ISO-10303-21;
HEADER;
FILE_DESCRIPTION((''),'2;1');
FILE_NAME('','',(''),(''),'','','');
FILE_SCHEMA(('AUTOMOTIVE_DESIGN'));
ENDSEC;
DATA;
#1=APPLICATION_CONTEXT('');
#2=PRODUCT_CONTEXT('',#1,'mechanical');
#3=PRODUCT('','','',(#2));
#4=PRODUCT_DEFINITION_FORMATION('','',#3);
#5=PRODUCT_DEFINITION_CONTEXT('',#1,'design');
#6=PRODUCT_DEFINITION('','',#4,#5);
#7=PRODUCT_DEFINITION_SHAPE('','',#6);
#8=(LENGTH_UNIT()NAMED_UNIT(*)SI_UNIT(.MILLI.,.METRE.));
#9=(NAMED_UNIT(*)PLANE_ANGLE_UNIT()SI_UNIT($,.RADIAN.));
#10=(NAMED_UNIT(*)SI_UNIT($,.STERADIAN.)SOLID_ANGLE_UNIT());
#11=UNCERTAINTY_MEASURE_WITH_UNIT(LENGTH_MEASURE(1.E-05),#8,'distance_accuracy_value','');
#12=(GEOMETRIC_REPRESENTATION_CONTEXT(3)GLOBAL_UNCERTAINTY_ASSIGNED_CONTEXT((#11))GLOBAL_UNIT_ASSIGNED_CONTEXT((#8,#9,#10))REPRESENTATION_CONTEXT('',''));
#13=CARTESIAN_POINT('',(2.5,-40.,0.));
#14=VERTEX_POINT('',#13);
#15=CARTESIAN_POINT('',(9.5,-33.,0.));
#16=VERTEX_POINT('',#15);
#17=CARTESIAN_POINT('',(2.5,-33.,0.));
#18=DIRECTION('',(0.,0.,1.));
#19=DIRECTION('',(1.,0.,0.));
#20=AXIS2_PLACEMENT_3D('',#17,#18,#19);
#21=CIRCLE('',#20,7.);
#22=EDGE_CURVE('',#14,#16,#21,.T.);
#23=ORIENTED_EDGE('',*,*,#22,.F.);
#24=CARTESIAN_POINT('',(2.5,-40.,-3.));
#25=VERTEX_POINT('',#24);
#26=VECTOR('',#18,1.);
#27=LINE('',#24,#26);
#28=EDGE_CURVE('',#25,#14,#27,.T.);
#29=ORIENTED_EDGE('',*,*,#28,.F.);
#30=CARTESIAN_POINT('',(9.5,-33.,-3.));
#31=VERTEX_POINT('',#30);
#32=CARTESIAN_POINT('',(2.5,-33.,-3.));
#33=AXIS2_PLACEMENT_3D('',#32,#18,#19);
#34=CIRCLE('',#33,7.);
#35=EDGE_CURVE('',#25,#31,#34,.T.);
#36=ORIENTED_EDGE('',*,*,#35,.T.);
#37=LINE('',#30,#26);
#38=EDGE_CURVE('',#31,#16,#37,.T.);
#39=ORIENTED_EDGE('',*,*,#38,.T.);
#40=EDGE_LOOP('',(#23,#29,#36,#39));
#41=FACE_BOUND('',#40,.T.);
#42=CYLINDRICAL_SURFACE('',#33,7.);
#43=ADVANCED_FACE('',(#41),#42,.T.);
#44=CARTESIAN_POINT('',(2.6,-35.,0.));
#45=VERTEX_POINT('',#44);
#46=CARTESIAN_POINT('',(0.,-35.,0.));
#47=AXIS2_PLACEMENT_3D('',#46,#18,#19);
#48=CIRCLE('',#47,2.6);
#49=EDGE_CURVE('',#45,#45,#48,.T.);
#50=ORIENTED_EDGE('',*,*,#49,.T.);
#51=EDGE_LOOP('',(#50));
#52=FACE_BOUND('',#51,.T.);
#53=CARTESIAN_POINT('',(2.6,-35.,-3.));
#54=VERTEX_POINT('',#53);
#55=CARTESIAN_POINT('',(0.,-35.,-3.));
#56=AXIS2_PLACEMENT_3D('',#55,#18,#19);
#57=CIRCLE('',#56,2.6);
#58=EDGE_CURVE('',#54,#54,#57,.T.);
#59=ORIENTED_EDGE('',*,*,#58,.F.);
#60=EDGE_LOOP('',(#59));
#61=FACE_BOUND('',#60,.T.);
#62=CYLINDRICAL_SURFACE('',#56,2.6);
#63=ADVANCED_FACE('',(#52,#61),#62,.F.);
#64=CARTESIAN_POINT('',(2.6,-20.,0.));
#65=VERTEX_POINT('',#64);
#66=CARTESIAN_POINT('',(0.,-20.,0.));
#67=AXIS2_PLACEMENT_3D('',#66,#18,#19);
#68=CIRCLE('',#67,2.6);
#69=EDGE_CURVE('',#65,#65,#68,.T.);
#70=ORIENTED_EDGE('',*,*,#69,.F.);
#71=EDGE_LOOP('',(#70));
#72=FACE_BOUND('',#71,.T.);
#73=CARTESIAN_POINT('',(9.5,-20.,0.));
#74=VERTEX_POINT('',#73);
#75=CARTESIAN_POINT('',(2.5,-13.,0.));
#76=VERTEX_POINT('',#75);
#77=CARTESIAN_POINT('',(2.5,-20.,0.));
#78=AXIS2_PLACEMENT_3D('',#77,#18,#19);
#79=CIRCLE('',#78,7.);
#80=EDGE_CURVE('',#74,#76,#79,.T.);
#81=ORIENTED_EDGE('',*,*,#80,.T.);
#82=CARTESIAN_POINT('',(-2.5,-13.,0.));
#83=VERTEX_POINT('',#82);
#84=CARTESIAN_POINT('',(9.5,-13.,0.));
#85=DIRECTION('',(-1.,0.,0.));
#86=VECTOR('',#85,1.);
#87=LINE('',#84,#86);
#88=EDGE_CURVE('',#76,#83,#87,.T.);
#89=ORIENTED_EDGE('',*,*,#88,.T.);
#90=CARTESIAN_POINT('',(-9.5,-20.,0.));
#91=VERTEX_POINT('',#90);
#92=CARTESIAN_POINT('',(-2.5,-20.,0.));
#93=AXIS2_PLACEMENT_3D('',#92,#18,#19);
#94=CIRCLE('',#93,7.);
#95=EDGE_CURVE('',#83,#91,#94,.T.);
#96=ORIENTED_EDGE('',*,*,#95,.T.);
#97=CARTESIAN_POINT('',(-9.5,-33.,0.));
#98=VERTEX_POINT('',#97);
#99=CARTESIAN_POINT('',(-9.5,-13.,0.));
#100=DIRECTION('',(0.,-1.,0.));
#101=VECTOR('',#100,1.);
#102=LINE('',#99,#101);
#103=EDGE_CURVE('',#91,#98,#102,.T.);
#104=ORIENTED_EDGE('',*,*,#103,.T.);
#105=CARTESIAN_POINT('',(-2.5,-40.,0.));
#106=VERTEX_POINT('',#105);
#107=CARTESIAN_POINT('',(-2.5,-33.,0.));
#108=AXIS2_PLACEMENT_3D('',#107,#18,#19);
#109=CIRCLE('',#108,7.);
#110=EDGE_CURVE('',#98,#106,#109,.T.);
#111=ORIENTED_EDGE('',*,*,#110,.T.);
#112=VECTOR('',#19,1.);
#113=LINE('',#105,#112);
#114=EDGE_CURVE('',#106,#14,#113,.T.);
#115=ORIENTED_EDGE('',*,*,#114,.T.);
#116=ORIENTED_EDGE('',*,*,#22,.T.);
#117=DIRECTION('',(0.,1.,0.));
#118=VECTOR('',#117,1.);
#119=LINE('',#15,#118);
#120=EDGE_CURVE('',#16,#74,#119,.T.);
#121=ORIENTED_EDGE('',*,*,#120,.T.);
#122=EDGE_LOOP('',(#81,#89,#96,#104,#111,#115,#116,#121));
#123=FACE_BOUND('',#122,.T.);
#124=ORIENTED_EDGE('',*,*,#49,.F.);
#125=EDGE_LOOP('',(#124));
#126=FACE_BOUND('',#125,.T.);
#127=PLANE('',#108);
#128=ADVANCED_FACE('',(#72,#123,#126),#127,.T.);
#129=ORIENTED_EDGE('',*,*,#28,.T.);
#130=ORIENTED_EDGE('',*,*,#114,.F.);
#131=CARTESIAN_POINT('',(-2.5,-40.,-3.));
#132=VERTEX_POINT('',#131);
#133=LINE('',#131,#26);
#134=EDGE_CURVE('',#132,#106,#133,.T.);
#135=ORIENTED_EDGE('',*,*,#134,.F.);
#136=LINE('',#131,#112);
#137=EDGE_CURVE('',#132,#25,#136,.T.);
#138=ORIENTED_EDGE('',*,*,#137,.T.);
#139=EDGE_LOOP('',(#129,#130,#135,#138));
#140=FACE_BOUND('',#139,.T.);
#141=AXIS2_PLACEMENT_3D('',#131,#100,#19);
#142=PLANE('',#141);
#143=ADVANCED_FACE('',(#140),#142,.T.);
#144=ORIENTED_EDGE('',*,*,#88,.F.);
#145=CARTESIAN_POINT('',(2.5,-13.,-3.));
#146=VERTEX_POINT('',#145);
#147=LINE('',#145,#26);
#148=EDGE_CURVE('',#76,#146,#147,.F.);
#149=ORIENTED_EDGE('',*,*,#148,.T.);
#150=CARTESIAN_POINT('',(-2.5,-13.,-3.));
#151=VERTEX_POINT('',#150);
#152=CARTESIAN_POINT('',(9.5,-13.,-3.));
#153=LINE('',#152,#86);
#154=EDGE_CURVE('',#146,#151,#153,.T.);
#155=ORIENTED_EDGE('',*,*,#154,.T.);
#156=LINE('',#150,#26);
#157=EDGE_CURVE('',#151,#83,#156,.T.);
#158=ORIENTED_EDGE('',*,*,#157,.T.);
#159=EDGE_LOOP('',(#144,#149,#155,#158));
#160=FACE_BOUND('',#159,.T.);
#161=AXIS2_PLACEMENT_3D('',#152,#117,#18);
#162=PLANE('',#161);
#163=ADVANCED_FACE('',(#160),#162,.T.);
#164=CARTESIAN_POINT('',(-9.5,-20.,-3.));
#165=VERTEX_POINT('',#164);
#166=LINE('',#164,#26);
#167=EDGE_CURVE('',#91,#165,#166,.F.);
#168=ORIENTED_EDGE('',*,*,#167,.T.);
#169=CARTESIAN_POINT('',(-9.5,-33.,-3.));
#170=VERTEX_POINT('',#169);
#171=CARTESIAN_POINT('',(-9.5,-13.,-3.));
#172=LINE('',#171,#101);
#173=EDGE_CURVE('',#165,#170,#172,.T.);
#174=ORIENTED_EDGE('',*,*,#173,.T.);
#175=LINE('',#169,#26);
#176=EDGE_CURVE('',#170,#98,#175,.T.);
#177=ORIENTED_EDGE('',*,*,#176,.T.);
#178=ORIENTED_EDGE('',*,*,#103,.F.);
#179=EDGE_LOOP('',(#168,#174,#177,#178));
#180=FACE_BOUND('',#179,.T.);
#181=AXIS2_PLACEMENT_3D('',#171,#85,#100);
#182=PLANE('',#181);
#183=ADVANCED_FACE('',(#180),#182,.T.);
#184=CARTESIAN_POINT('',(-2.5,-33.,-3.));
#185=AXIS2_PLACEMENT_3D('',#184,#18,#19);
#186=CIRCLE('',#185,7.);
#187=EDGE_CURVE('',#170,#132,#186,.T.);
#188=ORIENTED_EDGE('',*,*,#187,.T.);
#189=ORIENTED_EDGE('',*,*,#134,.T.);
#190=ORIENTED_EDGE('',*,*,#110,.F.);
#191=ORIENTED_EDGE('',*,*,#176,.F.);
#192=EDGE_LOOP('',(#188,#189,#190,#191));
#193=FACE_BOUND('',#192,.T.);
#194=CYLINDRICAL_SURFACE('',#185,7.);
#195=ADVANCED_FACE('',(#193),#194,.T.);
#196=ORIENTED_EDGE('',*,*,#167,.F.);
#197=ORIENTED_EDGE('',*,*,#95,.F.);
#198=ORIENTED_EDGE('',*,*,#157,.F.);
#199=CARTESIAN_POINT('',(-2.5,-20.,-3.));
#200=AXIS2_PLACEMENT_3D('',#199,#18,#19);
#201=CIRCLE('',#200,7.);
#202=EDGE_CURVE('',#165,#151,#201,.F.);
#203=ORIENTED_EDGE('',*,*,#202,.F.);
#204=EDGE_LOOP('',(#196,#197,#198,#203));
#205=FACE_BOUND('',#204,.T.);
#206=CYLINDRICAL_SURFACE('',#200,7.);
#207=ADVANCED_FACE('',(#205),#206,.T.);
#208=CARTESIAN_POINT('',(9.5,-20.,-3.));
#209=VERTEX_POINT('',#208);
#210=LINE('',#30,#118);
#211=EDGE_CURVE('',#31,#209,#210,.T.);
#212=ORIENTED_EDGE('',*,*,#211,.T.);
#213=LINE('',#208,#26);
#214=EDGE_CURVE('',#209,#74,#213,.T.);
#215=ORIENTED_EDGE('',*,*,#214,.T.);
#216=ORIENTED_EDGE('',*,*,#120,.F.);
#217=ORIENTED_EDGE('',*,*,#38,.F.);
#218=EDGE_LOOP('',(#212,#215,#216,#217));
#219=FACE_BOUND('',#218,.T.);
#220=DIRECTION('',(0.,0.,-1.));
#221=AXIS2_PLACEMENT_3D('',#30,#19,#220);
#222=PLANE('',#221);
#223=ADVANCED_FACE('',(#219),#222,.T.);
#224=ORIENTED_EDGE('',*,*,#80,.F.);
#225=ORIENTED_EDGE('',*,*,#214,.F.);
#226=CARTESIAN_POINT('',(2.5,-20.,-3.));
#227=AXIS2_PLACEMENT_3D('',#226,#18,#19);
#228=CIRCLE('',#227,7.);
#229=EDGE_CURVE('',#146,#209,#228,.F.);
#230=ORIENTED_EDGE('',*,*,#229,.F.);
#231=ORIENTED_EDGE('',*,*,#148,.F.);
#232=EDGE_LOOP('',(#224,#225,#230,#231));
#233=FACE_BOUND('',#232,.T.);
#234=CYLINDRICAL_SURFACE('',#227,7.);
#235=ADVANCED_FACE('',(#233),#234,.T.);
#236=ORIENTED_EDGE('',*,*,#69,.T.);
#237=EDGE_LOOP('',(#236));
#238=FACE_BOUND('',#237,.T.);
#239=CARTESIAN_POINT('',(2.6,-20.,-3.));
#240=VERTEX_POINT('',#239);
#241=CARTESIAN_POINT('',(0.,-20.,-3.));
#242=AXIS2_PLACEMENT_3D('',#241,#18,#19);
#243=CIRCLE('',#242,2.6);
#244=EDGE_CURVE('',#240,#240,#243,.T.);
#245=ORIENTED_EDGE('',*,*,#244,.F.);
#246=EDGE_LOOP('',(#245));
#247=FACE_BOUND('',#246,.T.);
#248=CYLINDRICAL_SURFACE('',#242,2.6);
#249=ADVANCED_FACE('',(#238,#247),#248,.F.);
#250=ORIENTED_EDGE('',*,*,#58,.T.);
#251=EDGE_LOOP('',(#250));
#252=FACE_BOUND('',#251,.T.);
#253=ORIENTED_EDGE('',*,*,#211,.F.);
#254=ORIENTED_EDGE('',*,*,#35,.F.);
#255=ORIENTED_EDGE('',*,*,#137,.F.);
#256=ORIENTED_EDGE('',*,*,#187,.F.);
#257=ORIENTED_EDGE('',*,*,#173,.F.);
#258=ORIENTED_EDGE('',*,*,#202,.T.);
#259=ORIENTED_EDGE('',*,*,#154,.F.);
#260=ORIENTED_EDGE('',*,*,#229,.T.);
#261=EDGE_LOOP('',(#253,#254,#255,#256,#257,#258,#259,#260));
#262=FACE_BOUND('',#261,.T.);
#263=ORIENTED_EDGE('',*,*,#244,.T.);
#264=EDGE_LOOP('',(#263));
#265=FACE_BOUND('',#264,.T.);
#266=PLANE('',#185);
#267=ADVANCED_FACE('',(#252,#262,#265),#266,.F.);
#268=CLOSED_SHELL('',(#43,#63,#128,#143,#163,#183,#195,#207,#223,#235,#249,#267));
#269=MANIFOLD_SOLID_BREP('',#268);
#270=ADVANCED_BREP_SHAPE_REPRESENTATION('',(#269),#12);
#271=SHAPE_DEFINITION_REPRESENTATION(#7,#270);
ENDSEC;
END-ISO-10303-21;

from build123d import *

# Parameters (mm, degrees)
SKETCH1_R          = 2.6
BASE_FLANGE1_DEPTH = 3
FILLET1_R          = 7


# Sheet-metal steps are written as plain solids
with BuildPart() as part:
    # Sketch1 → Base-Flange1 (new body)
    with BuildSketch(Plane.XY):
        with BuildLine():
            Line((-9.5, -13), (-9.5, -33))
            ThreePointArc((-9.5, -33), (-7.449747468, -37.949747468), (-2.5, -40))
            Line((-2.5, -40), (2.5, -40))
            ThreePointArc((2.5, -40), (7.449747468, -37.949747468), (9.5, -33))
            Line((9.5, -33), (9.5, -13))
            Line((9.5, -13), (-9.5, -13))
        make_face()
        with Locations((0, -35)):
            Circle(SKETCH1_R, mode=Mode.SUBTRACT)
        with Locations((0, -20)):
            Circle(SKETCH1_R, mode=Mode.SUBTRACT)
    extrude(amount=-BASE_FLANGE1_DEPTH)

    # Fillet1
    fillet1_edges = [part.edges().sort_by_distance(p)[0] for p in [
        (9.5, -13, -1.5),
        (-9.5, -13, -1.5),
    ]]
    fillet(fillet1_edges, radius=FILLET1_R)


solid = part.part
